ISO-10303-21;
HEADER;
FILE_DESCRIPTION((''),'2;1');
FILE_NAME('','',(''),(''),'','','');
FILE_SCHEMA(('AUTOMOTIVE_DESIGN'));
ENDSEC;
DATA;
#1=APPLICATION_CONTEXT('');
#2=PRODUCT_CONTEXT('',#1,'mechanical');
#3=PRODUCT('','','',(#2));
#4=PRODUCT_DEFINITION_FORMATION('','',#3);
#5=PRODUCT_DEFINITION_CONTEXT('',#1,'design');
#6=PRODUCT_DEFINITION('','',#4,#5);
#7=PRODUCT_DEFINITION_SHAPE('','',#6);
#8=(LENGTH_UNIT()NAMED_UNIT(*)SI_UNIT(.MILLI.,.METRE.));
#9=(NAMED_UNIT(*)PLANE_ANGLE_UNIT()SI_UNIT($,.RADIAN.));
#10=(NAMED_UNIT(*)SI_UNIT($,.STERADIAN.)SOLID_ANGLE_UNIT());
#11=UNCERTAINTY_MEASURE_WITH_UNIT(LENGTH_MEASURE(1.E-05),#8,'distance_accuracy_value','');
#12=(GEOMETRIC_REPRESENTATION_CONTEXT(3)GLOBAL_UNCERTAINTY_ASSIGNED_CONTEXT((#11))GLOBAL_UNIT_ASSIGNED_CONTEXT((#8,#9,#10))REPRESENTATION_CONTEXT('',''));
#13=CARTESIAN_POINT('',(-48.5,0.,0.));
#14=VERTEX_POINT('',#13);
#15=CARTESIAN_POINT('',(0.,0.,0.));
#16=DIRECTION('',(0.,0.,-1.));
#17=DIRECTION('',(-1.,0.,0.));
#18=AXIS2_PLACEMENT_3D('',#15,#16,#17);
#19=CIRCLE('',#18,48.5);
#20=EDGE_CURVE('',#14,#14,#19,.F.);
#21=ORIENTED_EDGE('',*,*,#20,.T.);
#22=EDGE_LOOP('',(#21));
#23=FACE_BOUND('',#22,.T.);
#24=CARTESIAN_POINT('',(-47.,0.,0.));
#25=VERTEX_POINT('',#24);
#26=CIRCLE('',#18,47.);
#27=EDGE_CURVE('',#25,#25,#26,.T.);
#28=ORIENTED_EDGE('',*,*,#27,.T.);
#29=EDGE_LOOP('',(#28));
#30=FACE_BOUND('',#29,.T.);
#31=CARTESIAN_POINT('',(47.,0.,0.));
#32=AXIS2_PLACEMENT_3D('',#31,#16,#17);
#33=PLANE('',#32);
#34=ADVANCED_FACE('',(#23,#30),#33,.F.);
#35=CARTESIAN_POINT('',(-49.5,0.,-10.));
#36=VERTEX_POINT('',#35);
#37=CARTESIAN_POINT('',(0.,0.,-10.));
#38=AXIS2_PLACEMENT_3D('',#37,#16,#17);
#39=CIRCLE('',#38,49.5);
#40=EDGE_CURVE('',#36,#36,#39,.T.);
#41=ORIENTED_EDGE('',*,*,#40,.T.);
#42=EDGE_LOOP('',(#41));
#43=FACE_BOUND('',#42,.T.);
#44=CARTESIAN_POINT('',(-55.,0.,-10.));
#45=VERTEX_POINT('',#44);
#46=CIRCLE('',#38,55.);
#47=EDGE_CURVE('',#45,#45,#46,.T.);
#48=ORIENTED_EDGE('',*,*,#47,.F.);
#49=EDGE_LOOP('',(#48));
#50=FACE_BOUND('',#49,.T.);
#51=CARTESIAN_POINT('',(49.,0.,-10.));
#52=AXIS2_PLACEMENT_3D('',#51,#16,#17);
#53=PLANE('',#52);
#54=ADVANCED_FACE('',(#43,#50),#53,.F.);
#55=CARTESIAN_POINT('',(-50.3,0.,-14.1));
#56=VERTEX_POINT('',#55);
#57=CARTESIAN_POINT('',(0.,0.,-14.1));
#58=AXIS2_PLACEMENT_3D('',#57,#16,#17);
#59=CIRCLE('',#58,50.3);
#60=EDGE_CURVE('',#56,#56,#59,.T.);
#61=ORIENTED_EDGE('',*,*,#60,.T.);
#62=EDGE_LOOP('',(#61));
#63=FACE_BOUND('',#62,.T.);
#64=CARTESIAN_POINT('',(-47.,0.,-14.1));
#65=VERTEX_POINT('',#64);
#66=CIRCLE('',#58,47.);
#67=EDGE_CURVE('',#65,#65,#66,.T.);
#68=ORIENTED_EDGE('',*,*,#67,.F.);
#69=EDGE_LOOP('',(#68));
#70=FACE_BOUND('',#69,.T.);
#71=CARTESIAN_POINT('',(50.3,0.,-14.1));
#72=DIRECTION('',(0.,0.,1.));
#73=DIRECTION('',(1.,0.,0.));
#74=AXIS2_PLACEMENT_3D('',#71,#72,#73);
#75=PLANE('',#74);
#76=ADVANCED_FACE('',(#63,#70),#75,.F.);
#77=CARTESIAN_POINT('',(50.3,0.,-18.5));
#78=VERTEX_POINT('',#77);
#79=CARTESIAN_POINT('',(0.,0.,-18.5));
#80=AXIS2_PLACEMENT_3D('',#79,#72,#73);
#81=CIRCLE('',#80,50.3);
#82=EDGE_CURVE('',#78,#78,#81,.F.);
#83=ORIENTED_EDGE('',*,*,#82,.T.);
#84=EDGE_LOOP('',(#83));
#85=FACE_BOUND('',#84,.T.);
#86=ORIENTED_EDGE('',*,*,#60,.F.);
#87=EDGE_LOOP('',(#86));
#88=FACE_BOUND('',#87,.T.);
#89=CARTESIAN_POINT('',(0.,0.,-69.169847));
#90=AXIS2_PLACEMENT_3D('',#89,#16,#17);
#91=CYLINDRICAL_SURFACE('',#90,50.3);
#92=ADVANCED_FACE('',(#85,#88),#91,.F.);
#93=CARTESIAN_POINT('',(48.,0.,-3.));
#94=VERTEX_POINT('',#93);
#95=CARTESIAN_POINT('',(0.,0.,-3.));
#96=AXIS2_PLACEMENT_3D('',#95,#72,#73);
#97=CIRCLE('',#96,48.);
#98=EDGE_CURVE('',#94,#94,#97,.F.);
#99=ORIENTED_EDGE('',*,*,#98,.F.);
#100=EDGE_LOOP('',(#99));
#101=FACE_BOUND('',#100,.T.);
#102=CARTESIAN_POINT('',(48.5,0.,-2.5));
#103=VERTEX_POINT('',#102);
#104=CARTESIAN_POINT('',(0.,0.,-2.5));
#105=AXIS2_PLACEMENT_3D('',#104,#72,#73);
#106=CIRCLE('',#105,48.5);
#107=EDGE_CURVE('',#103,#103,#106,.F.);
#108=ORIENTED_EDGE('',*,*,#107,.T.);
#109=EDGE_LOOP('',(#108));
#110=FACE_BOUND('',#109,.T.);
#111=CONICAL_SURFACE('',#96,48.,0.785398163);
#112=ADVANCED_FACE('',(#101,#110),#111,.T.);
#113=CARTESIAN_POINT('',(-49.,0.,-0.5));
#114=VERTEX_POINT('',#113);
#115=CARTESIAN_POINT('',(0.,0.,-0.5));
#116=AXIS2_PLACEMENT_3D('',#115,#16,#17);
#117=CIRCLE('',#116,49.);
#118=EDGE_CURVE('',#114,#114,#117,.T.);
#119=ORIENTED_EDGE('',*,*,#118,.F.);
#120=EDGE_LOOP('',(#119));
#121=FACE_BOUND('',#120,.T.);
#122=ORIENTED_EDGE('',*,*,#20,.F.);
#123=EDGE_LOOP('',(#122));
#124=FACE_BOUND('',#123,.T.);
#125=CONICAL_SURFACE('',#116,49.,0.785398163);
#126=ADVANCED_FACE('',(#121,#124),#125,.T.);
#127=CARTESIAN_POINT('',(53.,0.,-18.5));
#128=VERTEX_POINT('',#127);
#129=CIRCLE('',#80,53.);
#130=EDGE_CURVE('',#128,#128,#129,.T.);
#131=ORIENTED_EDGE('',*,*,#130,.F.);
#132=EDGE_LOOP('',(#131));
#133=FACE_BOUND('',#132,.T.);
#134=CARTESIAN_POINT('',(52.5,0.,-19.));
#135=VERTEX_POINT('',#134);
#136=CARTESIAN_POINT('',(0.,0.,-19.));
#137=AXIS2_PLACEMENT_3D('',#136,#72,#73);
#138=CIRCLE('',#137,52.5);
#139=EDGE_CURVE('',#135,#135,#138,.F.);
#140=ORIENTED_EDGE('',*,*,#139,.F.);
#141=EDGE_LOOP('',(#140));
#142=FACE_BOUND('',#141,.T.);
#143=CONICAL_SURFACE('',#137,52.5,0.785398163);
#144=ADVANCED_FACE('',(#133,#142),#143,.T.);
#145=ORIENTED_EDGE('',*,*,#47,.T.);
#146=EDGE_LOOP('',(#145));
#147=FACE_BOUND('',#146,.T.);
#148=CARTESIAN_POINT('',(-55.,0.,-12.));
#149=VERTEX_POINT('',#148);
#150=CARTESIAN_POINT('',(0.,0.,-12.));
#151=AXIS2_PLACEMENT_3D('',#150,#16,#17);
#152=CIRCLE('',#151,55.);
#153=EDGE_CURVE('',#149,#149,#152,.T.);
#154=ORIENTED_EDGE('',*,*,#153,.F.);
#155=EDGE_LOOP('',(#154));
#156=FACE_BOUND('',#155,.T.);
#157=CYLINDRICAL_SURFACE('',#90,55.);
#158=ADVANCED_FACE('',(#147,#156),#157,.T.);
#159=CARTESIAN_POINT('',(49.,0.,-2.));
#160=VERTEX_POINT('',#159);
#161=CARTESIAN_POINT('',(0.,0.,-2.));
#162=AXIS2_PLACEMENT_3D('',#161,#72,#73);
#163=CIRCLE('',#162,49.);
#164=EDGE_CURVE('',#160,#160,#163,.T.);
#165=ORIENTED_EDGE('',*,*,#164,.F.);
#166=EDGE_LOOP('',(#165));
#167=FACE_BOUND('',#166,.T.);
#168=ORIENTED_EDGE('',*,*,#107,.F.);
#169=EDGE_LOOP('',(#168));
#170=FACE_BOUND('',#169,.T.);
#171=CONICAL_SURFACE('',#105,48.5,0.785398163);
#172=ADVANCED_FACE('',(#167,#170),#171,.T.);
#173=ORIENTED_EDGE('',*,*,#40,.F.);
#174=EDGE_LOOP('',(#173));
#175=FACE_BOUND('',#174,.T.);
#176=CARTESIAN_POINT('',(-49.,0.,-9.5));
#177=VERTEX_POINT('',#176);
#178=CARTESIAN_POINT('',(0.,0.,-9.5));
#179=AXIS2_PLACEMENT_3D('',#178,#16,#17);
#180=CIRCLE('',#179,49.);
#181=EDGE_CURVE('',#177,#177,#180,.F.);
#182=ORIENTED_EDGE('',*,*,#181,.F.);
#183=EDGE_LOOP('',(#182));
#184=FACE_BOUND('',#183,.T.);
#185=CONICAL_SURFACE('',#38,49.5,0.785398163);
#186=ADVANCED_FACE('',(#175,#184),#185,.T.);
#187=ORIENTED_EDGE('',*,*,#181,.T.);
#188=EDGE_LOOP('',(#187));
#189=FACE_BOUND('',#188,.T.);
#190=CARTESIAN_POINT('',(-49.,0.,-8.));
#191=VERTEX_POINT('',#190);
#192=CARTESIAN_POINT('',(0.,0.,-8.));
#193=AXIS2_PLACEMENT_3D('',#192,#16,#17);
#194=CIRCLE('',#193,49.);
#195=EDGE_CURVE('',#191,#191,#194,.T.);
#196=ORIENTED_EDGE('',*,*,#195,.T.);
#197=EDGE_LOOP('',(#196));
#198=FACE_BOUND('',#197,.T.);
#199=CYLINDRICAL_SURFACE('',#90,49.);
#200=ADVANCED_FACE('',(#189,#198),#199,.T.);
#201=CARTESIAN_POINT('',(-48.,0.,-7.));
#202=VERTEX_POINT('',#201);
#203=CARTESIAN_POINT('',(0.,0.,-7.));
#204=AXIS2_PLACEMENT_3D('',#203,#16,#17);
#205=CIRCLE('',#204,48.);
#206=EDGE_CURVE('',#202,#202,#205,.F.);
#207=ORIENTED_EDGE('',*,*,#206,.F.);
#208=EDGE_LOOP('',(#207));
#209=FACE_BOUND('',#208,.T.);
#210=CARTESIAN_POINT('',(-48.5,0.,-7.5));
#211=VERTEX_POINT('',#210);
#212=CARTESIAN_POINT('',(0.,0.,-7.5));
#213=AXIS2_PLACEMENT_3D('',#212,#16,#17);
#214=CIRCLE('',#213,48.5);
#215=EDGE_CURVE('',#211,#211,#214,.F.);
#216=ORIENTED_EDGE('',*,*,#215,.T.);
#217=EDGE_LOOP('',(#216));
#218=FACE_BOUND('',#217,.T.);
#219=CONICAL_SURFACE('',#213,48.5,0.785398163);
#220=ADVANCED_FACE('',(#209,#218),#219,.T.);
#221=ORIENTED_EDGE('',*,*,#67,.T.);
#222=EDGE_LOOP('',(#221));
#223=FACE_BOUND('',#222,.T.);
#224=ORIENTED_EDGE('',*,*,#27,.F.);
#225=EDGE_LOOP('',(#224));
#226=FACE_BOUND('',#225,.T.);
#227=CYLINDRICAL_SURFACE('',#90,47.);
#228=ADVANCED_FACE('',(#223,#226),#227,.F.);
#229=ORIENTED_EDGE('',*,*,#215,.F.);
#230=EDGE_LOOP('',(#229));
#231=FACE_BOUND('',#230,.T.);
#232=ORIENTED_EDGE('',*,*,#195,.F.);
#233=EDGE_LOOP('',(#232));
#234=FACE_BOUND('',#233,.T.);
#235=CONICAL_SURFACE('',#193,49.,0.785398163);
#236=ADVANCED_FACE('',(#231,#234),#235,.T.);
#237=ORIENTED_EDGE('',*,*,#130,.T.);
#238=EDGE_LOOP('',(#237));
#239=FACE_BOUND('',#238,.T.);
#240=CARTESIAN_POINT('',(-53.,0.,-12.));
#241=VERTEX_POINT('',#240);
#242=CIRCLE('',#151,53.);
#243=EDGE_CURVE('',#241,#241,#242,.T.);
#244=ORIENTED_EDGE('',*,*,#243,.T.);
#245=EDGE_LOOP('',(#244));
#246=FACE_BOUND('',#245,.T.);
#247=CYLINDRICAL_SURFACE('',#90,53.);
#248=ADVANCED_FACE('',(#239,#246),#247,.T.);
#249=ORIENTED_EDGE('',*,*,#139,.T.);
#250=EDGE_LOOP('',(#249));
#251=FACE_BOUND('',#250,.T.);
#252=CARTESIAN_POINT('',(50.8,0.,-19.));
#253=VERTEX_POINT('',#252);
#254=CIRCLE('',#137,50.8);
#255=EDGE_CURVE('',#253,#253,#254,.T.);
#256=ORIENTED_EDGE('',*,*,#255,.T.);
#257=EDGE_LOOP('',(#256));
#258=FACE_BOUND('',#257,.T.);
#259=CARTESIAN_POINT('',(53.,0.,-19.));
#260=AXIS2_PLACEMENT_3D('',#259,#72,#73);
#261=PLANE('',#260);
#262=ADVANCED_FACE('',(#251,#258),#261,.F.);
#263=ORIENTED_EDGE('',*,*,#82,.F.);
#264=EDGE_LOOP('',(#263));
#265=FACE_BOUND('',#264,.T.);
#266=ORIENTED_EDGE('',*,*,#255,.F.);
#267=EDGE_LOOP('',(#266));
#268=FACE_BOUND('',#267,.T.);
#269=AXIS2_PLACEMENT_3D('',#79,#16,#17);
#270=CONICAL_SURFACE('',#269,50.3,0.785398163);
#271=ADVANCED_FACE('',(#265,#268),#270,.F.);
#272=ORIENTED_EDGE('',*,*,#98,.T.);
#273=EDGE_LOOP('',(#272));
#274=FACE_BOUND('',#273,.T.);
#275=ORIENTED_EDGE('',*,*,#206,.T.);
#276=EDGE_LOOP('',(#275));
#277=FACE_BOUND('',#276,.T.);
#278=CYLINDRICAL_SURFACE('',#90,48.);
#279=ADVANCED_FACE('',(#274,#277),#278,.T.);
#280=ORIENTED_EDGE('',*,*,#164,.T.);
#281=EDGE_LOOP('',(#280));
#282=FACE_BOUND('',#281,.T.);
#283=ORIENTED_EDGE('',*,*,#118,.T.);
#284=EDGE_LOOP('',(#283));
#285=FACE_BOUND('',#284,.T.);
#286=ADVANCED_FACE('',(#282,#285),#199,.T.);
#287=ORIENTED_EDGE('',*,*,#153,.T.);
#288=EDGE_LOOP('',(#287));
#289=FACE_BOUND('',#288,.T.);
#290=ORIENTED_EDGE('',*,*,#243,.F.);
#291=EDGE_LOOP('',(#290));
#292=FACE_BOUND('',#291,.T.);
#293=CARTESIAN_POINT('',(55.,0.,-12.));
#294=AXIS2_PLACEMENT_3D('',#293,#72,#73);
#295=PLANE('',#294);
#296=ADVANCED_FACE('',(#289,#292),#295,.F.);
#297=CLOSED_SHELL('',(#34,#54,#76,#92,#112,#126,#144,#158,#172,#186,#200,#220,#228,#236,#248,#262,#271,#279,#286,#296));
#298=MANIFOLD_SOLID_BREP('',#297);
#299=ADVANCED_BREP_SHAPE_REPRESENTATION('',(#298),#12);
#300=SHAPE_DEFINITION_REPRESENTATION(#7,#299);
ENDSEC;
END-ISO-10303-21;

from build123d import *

# Parameters (mm, degrees)
CHAMFER1_SIZE = 0.5


with BuildPart() as part:
    # Sketch1 → Revolve1 (revolve)
    with BuildSketch(Plane(origin=(0, 0, 0), x_dir=(1, 0, 0), z_dir=(0, 1, 0)), mode=Mode.PRIVATE) as revolve1_sk:
        Polygon((50.3, 19), (50.3, 14.1), (47, 14.1), (47, 0), (49, 0), (49, 2.5), (48, 2.5), (48, 7.5), (49, 7.5), (49, 10), (55, 10), (55, 12), (53, 12), (53, 19), align=None)
    revolve(revolve1_sk.sketch.rotate(Axis((0, 0, -69.169847328), (0, 0, 1)), 180), axis=Axis((0, 0, -69.169847328), (0, 0, 1)))

    # Chamfer1
    chamfer1_edges = [part.edges().sort_by_distance(p)[0] for p in [
        (49, 0, -10),
        (49, 0, -7.5),
        (48, 0, -7.5),
        (48, 0, -2.5),
        (49, 0, -2.5),
        (49, 0, 0),
        (50.3, 0, -19),
        (53, 0, -19),
    ]]
    chamfer(chamfer1_edges, length=CHAMFER1_SIZE - 0.0001)  # a hair under: the kernel refuses the full size


solid = part.part
